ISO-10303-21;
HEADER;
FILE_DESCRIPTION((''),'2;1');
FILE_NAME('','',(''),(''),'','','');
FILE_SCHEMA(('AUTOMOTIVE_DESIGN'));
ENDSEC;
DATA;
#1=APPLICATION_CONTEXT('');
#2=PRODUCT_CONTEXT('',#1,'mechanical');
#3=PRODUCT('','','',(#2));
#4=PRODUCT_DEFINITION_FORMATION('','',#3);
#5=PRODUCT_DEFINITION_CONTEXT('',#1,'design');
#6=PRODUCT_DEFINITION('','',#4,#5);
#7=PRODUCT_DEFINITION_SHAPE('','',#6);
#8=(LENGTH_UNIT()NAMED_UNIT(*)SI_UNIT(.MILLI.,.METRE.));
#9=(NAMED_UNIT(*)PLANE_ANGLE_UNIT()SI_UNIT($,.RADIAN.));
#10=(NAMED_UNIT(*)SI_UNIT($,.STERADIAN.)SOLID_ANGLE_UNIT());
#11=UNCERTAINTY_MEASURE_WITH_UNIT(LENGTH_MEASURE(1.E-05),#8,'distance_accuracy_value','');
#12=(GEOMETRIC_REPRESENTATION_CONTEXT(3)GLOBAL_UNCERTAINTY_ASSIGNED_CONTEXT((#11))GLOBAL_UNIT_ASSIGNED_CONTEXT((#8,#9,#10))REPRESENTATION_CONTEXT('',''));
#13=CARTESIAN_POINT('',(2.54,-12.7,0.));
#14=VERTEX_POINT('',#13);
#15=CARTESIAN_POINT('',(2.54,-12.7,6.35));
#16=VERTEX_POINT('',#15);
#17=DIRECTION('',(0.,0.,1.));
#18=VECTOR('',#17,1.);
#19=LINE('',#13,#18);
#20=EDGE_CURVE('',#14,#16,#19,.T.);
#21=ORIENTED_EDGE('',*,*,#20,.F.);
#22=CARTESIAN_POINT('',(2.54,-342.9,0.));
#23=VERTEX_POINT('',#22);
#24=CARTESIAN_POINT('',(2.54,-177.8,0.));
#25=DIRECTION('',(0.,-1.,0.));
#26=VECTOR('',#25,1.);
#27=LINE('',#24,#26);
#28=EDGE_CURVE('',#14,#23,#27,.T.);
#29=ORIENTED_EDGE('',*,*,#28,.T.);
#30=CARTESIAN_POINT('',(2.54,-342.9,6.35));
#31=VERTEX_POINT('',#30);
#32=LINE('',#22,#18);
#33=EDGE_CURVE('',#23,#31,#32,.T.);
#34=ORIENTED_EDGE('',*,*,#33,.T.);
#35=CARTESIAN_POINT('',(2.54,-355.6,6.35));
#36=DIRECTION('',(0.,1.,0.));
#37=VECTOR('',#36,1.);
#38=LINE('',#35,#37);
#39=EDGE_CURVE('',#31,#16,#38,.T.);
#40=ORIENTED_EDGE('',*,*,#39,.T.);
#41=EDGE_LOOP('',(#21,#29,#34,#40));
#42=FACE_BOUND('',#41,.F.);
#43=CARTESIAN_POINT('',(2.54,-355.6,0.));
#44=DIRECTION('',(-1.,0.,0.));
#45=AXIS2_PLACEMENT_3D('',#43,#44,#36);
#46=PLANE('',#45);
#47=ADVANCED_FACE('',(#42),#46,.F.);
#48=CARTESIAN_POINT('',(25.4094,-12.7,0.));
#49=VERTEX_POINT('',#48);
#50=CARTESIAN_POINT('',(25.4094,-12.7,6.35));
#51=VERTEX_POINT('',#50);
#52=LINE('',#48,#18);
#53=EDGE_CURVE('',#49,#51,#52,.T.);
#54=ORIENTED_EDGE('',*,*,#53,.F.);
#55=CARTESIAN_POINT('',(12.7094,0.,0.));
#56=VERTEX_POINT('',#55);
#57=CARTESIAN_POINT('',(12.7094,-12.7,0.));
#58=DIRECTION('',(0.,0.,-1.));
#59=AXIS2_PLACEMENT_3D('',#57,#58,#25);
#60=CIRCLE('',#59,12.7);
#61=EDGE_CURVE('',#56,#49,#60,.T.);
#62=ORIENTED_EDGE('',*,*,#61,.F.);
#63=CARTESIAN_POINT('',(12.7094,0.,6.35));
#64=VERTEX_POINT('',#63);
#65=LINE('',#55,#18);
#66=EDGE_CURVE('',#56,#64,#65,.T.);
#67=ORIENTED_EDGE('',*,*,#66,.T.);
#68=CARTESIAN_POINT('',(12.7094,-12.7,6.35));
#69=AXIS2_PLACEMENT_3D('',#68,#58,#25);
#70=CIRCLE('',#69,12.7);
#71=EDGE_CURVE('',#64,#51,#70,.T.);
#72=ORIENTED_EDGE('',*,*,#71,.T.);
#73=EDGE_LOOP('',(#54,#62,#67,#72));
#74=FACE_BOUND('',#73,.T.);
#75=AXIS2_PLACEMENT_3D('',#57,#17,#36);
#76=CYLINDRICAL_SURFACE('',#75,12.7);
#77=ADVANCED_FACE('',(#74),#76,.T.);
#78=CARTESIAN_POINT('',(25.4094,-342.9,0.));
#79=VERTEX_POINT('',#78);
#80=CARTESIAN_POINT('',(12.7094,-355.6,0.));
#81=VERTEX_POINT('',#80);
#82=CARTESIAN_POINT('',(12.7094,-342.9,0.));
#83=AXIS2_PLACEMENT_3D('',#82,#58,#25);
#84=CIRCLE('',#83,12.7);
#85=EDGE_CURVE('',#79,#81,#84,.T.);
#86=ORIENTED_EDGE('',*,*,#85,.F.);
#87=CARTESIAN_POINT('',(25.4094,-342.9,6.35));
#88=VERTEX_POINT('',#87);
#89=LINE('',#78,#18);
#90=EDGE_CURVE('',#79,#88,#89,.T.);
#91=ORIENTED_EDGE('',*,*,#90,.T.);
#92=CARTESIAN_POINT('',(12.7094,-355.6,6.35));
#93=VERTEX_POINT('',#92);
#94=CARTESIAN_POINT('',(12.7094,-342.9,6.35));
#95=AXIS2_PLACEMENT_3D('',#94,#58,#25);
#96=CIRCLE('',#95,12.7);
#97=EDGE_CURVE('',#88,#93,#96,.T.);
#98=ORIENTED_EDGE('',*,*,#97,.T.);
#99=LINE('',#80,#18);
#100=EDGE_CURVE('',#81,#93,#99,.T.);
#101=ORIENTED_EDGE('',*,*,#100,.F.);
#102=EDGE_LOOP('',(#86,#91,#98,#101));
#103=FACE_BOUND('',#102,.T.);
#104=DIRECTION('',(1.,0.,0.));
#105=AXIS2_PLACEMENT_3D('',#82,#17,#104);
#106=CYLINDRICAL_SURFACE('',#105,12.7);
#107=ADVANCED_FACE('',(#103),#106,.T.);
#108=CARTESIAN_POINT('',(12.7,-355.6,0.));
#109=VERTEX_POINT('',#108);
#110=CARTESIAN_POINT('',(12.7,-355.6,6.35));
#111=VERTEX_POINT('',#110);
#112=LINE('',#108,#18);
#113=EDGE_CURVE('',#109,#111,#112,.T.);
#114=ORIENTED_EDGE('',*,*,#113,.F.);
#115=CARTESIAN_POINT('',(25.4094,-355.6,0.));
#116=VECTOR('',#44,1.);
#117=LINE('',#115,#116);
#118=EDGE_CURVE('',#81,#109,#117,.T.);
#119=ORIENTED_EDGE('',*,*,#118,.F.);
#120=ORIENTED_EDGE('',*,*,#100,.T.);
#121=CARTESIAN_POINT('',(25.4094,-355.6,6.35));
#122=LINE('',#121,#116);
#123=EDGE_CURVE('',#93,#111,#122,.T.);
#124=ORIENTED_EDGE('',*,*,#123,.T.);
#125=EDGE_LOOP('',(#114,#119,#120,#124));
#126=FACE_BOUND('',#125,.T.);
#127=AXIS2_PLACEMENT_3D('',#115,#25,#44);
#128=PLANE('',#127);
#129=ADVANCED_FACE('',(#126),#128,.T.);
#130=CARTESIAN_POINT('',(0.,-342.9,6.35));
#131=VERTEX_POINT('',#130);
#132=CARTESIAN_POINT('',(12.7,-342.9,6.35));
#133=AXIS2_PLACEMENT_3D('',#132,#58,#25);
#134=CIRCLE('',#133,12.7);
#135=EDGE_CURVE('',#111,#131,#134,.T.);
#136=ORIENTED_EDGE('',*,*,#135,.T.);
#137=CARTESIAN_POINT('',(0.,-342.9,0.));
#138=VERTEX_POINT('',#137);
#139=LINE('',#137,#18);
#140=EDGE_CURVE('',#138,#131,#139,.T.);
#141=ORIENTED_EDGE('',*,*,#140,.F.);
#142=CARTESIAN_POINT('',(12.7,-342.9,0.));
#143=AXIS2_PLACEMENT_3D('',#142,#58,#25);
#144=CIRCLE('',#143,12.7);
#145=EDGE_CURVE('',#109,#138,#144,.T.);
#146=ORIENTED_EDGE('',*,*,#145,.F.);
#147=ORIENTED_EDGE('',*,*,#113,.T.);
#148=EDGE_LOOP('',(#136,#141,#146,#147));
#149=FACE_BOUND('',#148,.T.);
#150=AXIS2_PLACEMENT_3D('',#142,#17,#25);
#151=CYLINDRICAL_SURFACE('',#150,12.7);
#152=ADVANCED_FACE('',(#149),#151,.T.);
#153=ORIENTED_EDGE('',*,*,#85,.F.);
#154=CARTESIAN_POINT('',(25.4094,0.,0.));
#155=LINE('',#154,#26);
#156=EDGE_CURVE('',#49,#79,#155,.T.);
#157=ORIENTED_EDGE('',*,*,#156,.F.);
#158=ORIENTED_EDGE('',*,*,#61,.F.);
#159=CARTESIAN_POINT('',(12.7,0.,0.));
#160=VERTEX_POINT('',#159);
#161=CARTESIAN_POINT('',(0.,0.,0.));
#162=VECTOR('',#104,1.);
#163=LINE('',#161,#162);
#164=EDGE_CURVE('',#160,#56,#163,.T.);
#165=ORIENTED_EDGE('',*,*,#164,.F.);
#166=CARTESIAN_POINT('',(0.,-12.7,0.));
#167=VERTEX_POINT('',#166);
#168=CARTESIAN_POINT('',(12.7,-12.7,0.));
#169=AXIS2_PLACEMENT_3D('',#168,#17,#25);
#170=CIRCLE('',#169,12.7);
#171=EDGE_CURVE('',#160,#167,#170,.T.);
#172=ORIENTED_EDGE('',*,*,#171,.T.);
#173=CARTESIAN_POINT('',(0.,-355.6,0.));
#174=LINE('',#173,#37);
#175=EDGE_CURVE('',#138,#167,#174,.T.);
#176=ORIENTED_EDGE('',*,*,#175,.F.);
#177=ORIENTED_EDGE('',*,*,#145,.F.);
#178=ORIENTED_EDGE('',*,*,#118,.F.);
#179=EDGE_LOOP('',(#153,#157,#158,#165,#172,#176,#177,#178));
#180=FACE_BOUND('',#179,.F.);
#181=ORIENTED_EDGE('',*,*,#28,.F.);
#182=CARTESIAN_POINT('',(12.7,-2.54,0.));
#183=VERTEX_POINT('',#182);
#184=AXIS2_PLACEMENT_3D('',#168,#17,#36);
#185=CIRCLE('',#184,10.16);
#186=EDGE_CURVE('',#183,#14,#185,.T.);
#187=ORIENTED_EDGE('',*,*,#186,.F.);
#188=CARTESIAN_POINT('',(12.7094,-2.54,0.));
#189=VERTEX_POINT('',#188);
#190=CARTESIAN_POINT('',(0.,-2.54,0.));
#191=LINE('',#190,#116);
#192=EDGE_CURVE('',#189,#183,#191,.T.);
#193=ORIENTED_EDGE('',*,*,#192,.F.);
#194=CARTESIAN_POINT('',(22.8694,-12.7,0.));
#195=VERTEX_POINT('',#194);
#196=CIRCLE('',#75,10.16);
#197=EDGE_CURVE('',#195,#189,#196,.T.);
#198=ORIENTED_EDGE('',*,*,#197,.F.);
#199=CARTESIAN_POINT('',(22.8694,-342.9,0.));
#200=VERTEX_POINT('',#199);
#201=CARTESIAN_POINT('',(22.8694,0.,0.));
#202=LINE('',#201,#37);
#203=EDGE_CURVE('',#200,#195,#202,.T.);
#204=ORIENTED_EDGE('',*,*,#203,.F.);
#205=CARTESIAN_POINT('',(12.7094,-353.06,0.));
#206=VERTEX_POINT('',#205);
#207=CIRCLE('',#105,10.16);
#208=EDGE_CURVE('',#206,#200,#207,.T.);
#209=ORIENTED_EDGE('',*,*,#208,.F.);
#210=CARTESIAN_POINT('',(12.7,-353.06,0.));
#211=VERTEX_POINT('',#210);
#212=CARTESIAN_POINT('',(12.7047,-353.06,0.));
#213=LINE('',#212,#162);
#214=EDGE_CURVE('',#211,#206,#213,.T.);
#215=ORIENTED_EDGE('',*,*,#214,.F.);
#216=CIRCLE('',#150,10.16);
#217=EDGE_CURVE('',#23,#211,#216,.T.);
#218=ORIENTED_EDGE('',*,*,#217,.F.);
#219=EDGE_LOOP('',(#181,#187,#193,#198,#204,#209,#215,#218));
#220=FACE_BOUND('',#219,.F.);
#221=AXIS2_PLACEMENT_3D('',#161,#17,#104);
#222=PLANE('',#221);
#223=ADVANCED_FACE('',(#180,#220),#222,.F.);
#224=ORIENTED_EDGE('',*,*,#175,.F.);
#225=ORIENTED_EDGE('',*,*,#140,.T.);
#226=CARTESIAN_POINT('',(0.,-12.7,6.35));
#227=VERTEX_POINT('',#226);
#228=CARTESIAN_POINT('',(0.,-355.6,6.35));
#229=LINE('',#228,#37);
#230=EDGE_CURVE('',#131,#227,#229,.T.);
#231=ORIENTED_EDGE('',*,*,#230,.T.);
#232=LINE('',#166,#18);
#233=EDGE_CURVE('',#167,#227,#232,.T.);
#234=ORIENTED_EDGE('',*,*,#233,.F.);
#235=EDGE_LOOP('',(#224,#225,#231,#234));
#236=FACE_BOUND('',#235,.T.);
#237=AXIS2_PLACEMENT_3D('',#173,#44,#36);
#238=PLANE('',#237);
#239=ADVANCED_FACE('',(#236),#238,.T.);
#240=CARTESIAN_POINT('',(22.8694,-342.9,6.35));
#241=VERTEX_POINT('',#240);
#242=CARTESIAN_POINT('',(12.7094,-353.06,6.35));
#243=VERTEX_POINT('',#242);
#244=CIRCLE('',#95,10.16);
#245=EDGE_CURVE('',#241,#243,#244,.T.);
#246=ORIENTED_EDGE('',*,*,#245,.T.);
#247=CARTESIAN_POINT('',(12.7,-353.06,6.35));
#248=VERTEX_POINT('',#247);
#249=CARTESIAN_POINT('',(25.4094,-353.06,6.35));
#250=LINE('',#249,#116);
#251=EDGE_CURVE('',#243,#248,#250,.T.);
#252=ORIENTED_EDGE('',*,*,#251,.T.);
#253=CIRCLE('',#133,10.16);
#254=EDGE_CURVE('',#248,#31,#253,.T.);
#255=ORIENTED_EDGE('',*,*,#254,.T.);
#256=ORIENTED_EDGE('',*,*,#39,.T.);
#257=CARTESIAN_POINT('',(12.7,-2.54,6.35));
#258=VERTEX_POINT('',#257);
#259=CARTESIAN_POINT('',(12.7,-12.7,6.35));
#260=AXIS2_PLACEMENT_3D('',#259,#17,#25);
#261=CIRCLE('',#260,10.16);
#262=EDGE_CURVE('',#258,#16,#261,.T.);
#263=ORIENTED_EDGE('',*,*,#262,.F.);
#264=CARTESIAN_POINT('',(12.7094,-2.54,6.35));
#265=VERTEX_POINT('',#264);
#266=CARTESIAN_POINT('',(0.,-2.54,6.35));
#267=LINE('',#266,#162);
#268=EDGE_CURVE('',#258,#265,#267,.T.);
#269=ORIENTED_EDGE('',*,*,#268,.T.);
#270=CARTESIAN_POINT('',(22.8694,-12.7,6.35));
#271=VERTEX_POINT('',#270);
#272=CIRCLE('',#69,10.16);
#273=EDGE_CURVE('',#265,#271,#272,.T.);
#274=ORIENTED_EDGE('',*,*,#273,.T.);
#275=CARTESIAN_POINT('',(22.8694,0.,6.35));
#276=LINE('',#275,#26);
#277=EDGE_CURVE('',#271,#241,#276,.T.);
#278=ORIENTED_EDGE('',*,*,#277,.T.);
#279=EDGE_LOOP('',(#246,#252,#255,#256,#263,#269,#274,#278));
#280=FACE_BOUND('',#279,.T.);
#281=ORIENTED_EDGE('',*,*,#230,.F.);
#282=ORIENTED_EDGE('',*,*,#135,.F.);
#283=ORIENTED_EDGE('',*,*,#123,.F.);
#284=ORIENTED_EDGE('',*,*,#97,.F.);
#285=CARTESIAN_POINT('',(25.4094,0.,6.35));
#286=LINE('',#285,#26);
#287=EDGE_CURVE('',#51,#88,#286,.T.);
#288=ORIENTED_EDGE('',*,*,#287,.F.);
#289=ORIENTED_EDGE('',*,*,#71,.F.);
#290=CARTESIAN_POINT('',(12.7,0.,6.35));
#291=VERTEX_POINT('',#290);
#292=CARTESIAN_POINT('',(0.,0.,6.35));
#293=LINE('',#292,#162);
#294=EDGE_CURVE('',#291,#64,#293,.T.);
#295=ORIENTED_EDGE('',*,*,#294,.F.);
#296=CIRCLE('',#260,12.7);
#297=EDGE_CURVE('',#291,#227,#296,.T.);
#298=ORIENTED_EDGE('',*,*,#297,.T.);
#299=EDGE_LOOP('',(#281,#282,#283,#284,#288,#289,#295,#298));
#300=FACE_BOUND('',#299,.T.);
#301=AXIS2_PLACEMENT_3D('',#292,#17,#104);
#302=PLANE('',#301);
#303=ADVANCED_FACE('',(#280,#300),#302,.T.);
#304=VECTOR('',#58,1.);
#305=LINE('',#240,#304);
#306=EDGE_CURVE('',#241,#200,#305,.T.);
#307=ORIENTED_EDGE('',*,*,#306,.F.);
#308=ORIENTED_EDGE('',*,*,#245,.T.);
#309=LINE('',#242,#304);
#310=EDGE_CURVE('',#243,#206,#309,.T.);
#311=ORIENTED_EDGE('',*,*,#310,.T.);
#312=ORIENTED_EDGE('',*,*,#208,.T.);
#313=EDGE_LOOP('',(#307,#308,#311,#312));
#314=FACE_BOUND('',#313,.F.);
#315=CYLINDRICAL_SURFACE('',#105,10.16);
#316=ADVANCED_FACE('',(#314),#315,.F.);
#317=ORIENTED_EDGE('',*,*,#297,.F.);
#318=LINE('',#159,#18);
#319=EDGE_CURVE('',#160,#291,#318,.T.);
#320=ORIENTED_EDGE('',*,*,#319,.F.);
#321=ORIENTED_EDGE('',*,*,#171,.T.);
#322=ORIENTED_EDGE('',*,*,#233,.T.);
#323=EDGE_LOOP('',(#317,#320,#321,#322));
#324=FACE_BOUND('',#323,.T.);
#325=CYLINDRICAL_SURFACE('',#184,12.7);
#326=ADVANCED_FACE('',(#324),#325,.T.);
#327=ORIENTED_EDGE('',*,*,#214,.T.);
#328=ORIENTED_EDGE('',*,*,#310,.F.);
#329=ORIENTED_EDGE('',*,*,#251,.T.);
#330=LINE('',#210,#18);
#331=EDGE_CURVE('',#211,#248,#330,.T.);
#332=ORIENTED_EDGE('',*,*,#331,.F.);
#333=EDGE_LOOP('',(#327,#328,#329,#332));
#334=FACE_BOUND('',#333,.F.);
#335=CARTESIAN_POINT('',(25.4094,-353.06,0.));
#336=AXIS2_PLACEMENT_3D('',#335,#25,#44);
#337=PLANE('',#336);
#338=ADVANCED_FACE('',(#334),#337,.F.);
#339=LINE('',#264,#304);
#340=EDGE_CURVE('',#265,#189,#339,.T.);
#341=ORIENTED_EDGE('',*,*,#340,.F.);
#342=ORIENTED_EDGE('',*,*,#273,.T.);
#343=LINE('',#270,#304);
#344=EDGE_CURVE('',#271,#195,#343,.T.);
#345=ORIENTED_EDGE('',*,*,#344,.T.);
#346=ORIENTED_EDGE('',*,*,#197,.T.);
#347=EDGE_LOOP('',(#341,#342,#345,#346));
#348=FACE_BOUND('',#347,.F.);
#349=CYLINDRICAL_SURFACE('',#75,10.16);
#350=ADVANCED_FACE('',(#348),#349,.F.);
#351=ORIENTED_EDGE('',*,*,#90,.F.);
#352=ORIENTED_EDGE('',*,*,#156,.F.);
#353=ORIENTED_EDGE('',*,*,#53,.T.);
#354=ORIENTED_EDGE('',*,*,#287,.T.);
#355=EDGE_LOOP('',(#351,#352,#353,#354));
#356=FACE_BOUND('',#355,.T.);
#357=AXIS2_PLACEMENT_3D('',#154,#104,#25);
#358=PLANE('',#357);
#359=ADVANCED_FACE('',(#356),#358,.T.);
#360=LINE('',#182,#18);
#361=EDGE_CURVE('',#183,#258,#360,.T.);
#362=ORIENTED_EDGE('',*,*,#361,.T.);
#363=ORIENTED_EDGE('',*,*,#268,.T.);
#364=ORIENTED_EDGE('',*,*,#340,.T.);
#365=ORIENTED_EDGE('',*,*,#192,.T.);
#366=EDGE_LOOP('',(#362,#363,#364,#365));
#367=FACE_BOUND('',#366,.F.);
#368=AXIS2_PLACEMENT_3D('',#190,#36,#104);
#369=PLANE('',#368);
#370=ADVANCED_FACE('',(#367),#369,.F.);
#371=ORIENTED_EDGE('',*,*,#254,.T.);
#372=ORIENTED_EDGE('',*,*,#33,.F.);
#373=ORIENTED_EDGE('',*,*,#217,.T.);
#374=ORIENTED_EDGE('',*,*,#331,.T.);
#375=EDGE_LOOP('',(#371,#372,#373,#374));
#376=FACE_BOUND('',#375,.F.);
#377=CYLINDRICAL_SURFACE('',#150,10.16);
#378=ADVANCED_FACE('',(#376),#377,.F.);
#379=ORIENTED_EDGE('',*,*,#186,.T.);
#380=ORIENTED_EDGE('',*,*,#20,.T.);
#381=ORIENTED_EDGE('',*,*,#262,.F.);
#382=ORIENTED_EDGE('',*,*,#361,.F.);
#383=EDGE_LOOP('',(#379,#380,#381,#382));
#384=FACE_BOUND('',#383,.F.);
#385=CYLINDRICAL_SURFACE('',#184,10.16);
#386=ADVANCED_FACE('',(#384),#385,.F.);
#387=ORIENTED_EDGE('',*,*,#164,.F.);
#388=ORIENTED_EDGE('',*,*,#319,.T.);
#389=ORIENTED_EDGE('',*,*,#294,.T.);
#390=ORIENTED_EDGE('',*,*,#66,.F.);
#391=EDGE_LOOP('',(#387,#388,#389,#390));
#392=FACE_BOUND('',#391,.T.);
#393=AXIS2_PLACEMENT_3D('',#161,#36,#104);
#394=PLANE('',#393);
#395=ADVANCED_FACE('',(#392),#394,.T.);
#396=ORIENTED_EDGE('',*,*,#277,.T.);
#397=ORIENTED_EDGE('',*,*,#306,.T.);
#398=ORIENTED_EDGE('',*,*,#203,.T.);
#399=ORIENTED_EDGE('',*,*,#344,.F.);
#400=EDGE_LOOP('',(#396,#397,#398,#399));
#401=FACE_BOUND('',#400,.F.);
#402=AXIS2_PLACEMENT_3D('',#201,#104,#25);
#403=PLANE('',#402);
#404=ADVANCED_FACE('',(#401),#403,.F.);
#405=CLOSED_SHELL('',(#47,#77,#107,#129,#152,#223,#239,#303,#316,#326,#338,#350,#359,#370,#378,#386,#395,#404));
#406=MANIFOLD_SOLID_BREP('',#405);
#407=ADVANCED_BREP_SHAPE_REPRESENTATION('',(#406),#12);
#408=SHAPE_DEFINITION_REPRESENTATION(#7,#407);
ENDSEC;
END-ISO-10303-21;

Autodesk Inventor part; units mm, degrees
ref_plane "YZ Plane" through (0, 0, 0) normal (1, 0, 0) x (0, 1, 0)
ref_plane "XZ Plane" through (0, 0, 0) normal (0, 1, 0) x (-1, 0, 0)
ref_plane "XY Plane" through (0, 0, 0) normal (0, 0, 1) x (1, 0, 0)
sketch "Sketch1" plane through (0, 0, 0) normal (0, 0, 1) x (1, 0, 0)
  line L0 (0, 0) -> (25.4094, 0)
  line L1 (25.4094, 0) -> (25.4094, -355.6)
  line L2 (25.4094, -355.6) -> (0, -355.6)
  line L3 (0, -355.6) -> (0, 0)
  dimension "d0" = 355.6
extrude "Extrusion1" add sketch "Sketch1" along normal blind 6.35
fillet "Fillet1" radius 12.7 1 edges at (0, 0, 3.175)
fillet "Fillet2" radius 12.7 1 edges at (25.4094, 0, 3.175)
fillet "Fillet3" radius 12.7 1 edges at (25.4094, -355.6, 3.175)
fillet "Fillet4" radius 12.7 1 edges at (0, -355.6, 3.175)
shell "Shell1" thickness 2.54 removed faces 1 at (8.4698, -122.7667, 0)
shell "Shell2" thickness 2.54 removed faces 2 at (9.3165, -122.7667, 3.81) at (8.4698, -122.7667, 6.35)
properties part number "LiftWireLine14in"
